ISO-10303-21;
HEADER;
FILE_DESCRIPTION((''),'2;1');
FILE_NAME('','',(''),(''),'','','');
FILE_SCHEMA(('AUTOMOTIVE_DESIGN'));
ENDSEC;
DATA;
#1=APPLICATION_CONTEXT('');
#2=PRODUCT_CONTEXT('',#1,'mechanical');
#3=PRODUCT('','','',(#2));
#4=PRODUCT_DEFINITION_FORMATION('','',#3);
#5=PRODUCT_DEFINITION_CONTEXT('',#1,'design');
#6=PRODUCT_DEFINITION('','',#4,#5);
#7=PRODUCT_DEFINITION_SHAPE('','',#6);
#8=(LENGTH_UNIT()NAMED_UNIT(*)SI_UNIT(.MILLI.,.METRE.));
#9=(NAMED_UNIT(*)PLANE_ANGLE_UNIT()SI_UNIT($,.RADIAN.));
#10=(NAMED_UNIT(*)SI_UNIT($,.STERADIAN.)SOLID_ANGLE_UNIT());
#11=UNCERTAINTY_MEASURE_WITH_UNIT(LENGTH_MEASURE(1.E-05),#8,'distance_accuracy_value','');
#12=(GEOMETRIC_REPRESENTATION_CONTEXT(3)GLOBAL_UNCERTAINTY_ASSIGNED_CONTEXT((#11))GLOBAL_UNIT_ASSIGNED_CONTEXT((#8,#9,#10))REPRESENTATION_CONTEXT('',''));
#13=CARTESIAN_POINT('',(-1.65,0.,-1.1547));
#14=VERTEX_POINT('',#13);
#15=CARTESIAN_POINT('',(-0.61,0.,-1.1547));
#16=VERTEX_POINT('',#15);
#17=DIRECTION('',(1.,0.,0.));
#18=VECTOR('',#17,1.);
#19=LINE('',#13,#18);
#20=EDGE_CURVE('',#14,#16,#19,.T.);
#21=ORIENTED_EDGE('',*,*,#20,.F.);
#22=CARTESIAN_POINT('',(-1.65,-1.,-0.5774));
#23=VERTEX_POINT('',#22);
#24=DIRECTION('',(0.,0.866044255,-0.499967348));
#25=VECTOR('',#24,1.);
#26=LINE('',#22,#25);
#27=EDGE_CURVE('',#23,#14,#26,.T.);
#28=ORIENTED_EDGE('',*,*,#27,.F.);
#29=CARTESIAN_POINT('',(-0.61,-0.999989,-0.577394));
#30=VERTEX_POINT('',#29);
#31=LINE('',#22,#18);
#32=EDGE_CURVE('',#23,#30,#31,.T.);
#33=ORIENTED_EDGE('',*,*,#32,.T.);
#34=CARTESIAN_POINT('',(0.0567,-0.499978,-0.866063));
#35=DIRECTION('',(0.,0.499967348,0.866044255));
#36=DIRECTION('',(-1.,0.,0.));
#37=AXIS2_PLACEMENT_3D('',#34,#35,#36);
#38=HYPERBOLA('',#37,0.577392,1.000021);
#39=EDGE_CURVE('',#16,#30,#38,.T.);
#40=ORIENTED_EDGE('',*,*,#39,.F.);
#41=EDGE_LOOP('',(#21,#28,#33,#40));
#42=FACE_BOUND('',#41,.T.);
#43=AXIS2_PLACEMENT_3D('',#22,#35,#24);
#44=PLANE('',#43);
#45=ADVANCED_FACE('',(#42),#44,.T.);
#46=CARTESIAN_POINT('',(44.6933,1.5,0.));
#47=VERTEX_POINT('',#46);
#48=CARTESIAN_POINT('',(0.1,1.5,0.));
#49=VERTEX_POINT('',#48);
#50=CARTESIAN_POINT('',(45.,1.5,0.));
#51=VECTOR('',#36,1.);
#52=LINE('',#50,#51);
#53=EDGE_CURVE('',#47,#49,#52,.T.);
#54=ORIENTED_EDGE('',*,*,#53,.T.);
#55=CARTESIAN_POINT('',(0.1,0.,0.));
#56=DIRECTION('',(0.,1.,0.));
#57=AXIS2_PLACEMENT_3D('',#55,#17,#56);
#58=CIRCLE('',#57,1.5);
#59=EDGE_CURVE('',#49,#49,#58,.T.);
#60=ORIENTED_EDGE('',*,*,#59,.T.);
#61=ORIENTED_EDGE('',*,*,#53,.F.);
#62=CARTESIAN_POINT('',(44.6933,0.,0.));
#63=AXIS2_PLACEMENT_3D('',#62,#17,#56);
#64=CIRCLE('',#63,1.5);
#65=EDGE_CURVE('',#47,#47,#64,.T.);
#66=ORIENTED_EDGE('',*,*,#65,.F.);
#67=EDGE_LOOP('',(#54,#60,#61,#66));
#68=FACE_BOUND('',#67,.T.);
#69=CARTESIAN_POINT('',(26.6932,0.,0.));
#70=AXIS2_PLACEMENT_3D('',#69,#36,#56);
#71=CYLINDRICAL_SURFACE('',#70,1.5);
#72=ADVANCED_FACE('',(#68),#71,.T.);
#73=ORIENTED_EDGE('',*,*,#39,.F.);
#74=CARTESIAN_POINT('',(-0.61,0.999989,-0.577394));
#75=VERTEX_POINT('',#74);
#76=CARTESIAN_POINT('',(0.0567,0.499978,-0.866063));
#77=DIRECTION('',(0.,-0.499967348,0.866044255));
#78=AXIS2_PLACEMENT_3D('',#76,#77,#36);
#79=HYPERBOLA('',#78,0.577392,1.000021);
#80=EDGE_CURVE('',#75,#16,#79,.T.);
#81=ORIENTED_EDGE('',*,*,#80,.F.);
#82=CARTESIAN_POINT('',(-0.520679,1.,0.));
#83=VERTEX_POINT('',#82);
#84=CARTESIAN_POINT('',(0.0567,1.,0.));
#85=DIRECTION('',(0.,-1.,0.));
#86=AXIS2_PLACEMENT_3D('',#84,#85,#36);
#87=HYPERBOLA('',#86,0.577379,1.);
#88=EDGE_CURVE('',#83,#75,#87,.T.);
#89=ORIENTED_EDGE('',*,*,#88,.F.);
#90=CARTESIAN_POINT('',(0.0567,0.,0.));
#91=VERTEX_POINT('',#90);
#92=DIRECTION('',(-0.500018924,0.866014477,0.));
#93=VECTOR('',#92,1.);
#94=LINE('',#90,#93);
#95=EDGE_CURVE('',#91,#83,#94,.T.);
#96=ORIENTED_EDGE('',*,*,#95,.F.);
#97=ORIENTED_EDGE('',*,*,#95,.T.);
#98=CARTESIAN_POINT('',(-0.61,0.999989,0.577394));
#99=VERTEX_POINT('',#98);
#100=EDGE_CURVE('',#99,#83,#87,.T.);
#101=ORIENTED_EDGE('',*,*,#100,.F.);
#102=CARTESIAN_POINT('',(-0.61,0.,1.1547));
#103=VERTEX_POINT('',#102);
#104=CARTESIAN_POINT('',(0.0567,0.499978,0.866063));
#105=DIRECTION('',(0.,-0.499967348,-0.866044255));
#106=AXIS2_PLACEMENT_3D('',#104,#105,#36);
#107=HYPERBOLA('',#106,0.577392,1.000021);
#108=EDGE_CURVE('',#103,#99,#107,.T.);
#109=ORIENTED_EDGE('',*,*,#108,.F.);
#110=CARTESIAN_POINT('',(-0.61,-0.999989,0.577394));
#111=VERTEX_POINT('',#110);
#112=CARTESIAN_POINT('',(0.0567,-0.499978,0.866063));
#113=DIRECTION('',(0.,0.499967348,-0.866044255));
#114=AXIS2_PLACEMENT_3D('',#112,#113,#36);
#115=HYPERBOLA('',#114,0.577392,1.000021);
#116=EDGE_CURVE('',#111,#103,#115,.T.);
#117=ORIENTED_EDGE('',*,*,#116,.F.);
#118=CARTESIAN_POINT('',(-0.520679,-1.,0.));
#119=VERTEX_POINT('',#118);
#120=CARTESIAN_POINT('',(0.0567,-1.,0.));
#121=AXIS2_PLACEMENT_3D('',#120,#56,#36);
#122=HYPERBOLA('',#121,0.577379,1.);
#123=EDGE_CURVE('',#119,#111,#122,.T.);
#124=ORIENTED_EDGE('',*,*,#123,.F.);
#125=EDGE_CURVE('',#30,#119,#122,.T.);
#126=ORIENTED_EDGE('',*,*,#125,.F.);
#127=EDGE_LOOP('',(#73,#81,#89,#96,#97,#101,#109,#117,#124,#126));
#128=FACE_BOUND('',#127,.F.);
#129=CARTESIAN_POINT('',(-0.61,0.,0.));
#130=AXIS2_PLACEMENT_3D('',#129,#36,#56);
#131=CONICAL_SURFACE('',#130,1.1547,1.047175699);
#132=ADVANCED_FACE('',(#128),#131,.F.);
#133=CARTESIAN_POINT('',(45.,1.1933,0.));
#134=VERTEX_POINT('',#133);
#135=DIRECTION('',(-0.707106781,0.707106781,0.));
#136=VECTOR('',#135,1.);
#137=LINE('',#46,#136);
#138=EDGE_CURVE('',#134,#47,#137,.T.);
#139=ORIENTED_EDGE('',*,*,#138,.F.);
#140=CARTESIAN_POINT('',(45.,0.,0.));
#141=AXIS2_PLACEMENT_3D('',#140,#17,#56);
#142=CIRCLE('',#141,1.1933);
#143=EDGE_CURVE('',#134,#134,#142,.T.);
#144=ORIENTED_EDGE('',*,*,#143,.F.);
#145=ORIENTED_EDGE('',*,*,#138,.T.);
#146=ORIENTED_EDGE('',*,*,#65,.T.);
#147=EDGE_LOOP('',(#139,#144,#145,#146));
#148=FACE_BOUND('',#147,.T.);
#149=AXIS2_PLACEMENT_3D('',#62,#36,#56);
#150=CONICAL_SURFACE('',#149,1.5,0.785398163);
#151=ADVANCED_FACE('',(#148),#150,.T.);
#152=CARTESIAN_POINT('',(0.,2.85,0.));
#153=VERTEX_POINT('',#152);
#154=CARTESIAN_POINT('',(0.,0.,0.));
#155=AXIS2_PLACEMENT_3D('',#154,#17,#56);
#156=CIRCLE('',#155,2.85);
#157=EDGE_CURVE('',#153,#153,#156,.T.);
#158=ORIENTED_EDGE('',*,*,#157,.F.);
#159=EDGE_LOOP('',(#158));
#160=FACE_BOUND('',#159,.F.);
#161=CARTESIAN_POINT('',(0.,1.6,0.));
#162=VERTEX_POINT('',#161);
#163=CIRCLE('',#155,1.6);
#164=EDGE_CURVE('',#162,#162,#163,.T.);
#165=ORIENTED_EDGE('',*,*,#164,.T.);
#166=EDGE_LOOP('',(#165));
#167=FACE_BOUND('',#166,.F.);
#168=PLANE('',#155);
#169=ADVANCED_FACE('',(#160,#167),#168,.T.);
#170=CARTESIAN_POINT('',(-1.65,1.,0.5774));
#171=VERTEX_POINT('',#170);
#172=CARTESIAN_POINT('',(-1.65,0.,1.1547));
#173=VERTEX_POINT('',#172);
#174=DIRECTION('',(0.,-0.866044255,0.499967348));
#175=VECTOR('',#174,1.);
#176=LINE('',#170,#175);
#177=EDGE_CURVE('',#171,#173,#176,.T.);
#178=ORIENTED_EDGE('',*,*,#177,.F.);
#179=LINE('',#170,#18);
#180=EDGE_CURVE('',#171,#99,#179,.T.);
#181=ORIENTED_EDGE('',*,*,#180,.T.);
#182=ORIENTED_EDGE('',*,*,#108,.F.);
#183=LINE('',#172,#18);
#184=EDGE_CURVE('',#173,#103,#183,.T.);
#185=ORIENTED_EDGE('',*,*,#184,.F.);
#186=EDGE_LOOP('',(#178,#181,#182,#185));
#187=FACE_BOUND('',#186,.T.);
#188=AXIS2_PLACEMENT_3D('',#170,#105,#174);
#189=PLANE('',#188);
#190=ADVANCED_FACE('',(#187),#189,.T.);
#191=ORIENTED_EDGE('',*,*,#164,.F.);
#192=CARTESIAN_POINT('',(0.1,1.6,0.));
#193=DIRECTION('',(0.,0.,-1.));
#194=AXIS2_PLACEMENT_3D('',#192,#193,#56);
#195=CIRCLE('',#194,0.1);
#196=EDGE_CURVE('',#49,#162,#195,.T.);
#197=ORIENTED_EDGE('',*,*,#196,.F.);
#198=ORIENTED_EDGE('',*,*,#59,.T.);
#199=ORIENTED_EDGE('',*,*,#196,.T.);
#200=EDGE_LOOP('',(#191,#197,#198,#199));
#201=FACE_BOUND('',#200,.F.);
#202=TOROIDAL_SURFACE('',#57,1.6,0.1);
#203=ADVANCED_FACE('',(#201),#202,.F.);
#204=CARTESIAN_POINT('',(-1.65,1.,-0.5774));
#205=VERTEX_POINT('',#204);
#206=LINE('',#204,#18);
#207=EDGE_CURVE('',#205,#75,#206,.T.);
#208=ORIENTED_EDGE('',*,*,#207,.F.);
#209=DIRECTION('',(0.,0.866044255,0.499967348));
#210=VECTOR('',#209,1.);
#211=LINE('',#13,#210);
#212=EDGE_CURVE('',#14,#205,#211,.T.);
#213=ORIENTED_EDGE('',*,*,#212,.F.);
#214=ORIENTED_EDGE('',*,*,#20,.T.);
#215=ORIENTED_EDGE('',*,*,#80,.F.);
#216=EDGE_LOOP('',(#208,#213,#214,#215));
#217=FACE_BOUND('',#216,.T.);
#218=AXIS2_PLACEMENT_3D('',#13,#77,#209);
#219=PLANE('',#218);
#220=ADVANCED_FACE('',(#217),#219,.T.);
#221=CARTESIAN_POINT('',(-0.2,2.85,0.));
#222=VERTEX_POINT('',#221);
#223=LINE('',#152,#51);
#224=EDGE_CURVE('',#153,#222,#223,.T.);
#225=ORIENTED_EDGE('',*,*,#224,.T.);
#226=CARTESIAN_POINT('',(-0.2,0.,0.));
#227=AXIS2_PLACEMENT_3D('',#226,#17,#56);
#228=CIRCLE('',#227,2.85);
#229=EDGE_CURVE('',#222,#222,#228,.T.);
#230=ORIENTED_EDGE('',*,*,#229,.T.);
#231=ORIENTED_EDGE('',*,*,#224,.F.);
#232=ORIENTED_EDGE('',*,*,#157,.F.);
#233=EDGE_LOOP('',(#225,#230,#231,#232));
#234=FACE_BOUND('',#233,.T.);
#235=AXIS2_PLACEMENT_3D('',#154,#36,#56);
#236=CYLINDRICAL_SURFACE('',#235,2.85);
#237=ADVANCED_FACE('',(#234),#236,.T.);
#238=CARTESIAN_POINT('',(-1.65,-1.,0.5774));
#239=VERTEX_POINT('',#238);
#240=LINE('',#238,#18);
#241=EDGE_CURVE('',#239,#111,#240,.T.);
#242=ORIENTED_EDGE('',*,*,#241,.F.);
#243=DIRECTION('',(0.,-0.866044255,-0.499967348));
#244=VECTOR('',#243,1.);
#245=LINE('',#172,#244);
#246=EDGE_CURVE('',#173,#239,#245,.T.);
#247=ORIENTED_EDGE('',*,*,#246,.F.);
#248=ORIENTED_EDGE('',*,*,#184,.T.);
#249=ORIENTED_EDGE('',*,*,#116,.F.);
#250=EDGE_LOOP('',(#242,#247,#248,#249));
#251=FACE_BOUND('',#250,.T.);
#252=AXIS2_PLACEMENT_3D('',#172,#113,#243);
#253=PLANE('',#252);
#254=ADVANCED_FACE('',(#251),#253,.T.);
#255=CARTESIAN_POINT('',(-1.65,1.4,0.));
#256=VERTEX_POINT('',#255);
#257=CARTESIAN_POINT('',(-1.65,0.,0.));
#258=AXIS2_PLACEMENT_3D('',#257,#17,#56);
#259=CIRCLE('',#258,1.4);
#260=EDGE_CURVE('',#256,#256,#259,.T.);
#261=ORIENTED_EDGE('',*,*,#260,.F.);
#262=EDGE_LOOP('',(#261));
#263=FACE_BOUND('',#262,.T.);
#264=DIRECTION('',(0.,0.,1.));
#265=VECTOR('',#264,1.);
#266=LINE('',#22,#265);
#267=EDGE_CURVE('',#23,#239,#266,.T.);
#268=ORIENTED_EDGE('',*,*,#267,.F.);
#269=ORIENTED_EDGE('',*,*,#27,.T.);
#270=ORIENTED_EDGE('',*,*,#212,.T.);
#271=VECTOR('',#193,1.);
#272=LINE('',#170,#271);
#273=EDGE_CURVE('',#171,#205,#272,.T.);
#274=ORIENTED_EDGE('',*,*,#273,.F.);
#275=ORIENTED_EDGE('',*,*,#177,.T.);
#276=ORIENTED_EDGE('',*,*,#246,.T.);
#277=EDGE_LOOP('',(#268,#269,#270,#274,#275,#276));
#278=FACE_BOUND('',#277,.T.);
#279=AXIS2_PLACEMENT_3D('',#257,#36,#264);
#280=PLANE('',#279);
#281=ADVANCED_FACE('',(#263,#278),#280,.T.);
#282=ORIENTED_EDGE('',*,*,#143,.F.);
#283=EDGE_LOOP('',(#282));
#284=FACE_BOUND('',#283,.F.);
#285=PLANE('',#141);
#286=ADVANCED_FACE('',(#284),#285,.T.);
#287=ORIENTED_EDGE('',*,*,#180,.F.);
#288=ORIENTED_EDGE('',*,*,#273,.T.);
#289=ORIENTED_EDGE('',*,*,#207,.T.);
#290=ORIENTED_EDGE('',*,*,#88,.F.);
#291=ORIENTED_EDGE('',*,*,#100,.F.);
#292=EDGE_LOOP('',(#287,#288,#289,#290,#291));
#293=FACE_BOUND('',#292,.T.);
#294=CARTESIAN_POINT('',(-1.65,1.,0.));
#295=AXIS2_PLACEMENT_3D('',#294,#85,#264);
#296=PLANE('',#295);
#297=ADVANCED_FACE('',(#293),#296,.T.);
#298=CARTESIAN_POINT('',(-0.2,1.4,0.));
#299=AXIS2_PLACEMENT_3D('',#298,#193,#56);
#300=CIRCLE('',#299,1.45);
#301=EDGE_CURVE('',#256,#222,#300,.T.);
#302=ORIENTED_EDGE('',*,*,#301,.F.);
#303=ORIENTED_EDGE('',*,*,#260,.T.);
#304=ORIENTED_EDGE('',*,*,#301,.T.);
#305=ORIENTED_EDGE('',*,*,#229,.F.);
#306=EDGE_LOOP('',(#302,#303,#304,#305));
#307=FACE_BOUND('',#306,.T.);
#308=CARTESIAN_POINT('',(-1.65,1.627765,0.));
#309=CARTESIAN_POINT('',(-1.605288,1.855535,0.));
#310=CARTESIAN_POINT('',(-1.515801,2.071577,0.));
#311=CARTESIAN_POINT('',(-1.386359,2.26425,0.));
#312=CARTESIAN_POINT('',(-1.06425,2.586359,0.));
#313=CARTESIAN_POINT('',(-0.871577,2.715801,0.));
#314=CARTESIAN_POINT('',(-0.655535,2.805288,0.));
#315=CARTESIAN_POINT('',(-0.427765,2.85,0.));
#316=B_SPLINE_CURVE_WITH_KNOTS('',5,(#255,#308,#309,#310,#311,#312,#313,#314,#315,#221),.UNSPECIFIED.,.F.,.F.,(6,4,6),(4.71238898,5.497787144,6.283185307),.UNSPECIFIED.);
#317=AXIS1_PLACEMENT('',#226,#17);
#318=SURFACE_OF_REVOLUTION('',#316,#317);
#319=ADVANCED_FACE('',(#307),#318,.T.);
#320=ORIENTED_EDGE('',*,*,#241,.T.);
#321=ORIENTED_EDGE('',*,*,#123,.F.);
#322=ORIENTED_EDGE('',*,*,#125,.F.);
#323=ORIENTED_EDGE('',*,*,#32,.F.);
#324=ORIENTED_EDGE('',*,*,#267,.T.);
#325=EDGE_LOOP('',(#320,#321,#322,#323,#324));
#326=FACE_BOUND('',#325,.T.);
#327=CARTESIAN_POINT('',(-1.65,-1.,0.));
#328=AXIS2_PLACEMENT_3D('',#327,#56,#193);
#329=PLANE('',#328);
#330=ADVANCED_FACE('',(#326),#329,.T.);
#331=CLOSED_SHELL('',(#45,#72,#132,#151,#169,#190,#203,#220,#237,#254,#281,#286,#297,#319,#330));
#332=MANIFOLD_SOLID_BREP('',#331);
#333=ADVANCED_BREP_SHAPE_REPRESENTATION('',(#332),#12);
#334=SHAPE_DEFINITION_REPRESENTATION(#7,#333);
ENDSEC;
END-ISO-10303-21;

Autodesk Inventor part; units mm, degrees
ref_plane "YZ Plane" through (0, 0, 0) normal (1, 0, 0) x (0, 1, 0)
ref_plane "XZ Plane" through (0, 0, 0) normal (0, 1, 0) x (-1, 0, 0)
sketch "Sketch1" plane through (0, 0, 0) normal (0, 0, 1) x (1, 0, 0)
  line L0 (0.0567, 0) -> (45, 0)
  line L1 (45, 0) -> (45, 1.5)
  line L2 (45, 1.5) -> (27, 1.5)
  line L3 (27, 1.5) -> (26.6932, 1.5)
  line L4 (26.6932, 1.5) -> (0, 1.5)
  line L5 (0, 1.5) -> (0, 2.85)
  line L6 (0, 2.85) -> (-1.65, 2.85)
  line L7 (-1.65, 2.85) -> (-1.65, 1.1547)
  line L8 (-1.65, 1.1547) -> (-0.61, 1.1547)
  line L9 (-0.61, 1.1547) -> (0.0567, 0)
  line L10 (-8.98, 0) -> (42.33, 0) projected
  line L11 (0, -0.57) -> (0, 3.42) projected
  line L12 (27, 1.5) -> (0, 1.5) construction
  dimension "d1" = 18
  dimension "d2" = 0.3068
  dimension "d3" = 1.65
  dimension "d4" = 1.04
  dimension "d5" = 60
  dimension "d6" = 3
  dimension "d7" = 3
  dimension "d8" = 2.3094
  dimension "d9" = 5.7
  dimension "d26" = 45
revolve "Body" add sketch "Sketch1" angle 360 about axis through (0.0567, 0, 0) along (1, 0, 0) contours L9 L11 L4 L3 L2 L1 L0 | L9 L8 L7 L6 L5 L11
sketch "Sketch2" plane through (-1.65, 0, 0) normal (-1, 0, 0) x (0, 0, 1)
  circle A0 centre (0, 0) radius 1.1547 projected
  line L0 (0, -3.99) -> (0, 3.99) projected
  line L1 (-3.99, 0) -> (3.99, 0) projected
  line L2 (1.1547, 0) -> (0.5774, -1)
  line L3 (0.5774, -1) -> (-0.5774, -1)
  line L4 (-0.5774, -1) -> (-1.1547, 0)
  line L5 (-1.1547, 0) -> (-0.5774, 1)
  line L6 (-0.5774, 1) -> (0.5774, 1)
  line L7 (0.5774, 1) -> (1.1547, 0)
extrude "Slot" add sketch "Sketch2" against normal up to next contours L7 A0 | A0 L2 | L6 L0 A0 | A0 L0 L3 | L0 L6 A0 | A0 L3 L0 | L4 A0 | A0 L5
fillet "Fillet1" radius 1.45 1 edges at (-1.65, -2.85, 0)
thread "Thread" size "M3x0.5" class "6g" standard "ISO Metric profile" length 18
chamfer "Chamfer1" distance 0.3067 distance2 0.3067 1 edges at (45, -1.5, 0) measured on face at (45, -0.8088, -0.4964)
ref_plane "Work Plane1" through (29, 0, 0) normal (0, -1, 0) x (1, 0, 0)
fillet "Fillet2" radius 0.1 1 edges at (0, -1.5, 0)
equation "\"d30\" = R"
equation "\"d17\" = RR"
equation "\"d13\" = GEL"
equation "\"d15\" = -0.5 * SPD + 0.5 * GD"
equation "\"d16\" = GUL"
equation "\"d1\" = GEL"
equation "\"d3\" = KOH"
equation "\"d4\" = INTI"
equation "\"d6\" = GD"
equation "\"d7\" = BDM"
equation "\"d8\" = 1.1547 * SW"
equation "\"d9\" = KOD"
equation "\"d26\" = NLG"
equation "\"GD\" = NND"
equation "\"NLG\" = 45"
equation "\"GEL\" = 18"
equation "\"KOD\" = 5.7"
equation "\"KOH\" = 1.65"
equation "\"INTI\" = 1.04"
equation "\"GAL\" = 0.61345 * PTC"
equation "\"GUL\" = 0.61345 * PTC"
equation "\"BDM\" = NND"
equation "\"SW\" = 2"
equation "\"RR\" = 1.45"
equation "\"SPD\" = NND - 1.2269 * PTC"
equation "\"R\" = 0.1"
equation "\"TOA\" = 30deg"
equation "\"GD1\" = THREADDIA - 1.2269 * PTC"
equation "\"THREADDIA\" = 3"
equation "\"PTC\" = 0.5"
equation "\"NND\" = 3"
equation "\"KOH1\" = 0.2"
equation "\"E0\" = 2.303"
properties part number "ISO 7380-1 - M3 x 30" material "Steel"
